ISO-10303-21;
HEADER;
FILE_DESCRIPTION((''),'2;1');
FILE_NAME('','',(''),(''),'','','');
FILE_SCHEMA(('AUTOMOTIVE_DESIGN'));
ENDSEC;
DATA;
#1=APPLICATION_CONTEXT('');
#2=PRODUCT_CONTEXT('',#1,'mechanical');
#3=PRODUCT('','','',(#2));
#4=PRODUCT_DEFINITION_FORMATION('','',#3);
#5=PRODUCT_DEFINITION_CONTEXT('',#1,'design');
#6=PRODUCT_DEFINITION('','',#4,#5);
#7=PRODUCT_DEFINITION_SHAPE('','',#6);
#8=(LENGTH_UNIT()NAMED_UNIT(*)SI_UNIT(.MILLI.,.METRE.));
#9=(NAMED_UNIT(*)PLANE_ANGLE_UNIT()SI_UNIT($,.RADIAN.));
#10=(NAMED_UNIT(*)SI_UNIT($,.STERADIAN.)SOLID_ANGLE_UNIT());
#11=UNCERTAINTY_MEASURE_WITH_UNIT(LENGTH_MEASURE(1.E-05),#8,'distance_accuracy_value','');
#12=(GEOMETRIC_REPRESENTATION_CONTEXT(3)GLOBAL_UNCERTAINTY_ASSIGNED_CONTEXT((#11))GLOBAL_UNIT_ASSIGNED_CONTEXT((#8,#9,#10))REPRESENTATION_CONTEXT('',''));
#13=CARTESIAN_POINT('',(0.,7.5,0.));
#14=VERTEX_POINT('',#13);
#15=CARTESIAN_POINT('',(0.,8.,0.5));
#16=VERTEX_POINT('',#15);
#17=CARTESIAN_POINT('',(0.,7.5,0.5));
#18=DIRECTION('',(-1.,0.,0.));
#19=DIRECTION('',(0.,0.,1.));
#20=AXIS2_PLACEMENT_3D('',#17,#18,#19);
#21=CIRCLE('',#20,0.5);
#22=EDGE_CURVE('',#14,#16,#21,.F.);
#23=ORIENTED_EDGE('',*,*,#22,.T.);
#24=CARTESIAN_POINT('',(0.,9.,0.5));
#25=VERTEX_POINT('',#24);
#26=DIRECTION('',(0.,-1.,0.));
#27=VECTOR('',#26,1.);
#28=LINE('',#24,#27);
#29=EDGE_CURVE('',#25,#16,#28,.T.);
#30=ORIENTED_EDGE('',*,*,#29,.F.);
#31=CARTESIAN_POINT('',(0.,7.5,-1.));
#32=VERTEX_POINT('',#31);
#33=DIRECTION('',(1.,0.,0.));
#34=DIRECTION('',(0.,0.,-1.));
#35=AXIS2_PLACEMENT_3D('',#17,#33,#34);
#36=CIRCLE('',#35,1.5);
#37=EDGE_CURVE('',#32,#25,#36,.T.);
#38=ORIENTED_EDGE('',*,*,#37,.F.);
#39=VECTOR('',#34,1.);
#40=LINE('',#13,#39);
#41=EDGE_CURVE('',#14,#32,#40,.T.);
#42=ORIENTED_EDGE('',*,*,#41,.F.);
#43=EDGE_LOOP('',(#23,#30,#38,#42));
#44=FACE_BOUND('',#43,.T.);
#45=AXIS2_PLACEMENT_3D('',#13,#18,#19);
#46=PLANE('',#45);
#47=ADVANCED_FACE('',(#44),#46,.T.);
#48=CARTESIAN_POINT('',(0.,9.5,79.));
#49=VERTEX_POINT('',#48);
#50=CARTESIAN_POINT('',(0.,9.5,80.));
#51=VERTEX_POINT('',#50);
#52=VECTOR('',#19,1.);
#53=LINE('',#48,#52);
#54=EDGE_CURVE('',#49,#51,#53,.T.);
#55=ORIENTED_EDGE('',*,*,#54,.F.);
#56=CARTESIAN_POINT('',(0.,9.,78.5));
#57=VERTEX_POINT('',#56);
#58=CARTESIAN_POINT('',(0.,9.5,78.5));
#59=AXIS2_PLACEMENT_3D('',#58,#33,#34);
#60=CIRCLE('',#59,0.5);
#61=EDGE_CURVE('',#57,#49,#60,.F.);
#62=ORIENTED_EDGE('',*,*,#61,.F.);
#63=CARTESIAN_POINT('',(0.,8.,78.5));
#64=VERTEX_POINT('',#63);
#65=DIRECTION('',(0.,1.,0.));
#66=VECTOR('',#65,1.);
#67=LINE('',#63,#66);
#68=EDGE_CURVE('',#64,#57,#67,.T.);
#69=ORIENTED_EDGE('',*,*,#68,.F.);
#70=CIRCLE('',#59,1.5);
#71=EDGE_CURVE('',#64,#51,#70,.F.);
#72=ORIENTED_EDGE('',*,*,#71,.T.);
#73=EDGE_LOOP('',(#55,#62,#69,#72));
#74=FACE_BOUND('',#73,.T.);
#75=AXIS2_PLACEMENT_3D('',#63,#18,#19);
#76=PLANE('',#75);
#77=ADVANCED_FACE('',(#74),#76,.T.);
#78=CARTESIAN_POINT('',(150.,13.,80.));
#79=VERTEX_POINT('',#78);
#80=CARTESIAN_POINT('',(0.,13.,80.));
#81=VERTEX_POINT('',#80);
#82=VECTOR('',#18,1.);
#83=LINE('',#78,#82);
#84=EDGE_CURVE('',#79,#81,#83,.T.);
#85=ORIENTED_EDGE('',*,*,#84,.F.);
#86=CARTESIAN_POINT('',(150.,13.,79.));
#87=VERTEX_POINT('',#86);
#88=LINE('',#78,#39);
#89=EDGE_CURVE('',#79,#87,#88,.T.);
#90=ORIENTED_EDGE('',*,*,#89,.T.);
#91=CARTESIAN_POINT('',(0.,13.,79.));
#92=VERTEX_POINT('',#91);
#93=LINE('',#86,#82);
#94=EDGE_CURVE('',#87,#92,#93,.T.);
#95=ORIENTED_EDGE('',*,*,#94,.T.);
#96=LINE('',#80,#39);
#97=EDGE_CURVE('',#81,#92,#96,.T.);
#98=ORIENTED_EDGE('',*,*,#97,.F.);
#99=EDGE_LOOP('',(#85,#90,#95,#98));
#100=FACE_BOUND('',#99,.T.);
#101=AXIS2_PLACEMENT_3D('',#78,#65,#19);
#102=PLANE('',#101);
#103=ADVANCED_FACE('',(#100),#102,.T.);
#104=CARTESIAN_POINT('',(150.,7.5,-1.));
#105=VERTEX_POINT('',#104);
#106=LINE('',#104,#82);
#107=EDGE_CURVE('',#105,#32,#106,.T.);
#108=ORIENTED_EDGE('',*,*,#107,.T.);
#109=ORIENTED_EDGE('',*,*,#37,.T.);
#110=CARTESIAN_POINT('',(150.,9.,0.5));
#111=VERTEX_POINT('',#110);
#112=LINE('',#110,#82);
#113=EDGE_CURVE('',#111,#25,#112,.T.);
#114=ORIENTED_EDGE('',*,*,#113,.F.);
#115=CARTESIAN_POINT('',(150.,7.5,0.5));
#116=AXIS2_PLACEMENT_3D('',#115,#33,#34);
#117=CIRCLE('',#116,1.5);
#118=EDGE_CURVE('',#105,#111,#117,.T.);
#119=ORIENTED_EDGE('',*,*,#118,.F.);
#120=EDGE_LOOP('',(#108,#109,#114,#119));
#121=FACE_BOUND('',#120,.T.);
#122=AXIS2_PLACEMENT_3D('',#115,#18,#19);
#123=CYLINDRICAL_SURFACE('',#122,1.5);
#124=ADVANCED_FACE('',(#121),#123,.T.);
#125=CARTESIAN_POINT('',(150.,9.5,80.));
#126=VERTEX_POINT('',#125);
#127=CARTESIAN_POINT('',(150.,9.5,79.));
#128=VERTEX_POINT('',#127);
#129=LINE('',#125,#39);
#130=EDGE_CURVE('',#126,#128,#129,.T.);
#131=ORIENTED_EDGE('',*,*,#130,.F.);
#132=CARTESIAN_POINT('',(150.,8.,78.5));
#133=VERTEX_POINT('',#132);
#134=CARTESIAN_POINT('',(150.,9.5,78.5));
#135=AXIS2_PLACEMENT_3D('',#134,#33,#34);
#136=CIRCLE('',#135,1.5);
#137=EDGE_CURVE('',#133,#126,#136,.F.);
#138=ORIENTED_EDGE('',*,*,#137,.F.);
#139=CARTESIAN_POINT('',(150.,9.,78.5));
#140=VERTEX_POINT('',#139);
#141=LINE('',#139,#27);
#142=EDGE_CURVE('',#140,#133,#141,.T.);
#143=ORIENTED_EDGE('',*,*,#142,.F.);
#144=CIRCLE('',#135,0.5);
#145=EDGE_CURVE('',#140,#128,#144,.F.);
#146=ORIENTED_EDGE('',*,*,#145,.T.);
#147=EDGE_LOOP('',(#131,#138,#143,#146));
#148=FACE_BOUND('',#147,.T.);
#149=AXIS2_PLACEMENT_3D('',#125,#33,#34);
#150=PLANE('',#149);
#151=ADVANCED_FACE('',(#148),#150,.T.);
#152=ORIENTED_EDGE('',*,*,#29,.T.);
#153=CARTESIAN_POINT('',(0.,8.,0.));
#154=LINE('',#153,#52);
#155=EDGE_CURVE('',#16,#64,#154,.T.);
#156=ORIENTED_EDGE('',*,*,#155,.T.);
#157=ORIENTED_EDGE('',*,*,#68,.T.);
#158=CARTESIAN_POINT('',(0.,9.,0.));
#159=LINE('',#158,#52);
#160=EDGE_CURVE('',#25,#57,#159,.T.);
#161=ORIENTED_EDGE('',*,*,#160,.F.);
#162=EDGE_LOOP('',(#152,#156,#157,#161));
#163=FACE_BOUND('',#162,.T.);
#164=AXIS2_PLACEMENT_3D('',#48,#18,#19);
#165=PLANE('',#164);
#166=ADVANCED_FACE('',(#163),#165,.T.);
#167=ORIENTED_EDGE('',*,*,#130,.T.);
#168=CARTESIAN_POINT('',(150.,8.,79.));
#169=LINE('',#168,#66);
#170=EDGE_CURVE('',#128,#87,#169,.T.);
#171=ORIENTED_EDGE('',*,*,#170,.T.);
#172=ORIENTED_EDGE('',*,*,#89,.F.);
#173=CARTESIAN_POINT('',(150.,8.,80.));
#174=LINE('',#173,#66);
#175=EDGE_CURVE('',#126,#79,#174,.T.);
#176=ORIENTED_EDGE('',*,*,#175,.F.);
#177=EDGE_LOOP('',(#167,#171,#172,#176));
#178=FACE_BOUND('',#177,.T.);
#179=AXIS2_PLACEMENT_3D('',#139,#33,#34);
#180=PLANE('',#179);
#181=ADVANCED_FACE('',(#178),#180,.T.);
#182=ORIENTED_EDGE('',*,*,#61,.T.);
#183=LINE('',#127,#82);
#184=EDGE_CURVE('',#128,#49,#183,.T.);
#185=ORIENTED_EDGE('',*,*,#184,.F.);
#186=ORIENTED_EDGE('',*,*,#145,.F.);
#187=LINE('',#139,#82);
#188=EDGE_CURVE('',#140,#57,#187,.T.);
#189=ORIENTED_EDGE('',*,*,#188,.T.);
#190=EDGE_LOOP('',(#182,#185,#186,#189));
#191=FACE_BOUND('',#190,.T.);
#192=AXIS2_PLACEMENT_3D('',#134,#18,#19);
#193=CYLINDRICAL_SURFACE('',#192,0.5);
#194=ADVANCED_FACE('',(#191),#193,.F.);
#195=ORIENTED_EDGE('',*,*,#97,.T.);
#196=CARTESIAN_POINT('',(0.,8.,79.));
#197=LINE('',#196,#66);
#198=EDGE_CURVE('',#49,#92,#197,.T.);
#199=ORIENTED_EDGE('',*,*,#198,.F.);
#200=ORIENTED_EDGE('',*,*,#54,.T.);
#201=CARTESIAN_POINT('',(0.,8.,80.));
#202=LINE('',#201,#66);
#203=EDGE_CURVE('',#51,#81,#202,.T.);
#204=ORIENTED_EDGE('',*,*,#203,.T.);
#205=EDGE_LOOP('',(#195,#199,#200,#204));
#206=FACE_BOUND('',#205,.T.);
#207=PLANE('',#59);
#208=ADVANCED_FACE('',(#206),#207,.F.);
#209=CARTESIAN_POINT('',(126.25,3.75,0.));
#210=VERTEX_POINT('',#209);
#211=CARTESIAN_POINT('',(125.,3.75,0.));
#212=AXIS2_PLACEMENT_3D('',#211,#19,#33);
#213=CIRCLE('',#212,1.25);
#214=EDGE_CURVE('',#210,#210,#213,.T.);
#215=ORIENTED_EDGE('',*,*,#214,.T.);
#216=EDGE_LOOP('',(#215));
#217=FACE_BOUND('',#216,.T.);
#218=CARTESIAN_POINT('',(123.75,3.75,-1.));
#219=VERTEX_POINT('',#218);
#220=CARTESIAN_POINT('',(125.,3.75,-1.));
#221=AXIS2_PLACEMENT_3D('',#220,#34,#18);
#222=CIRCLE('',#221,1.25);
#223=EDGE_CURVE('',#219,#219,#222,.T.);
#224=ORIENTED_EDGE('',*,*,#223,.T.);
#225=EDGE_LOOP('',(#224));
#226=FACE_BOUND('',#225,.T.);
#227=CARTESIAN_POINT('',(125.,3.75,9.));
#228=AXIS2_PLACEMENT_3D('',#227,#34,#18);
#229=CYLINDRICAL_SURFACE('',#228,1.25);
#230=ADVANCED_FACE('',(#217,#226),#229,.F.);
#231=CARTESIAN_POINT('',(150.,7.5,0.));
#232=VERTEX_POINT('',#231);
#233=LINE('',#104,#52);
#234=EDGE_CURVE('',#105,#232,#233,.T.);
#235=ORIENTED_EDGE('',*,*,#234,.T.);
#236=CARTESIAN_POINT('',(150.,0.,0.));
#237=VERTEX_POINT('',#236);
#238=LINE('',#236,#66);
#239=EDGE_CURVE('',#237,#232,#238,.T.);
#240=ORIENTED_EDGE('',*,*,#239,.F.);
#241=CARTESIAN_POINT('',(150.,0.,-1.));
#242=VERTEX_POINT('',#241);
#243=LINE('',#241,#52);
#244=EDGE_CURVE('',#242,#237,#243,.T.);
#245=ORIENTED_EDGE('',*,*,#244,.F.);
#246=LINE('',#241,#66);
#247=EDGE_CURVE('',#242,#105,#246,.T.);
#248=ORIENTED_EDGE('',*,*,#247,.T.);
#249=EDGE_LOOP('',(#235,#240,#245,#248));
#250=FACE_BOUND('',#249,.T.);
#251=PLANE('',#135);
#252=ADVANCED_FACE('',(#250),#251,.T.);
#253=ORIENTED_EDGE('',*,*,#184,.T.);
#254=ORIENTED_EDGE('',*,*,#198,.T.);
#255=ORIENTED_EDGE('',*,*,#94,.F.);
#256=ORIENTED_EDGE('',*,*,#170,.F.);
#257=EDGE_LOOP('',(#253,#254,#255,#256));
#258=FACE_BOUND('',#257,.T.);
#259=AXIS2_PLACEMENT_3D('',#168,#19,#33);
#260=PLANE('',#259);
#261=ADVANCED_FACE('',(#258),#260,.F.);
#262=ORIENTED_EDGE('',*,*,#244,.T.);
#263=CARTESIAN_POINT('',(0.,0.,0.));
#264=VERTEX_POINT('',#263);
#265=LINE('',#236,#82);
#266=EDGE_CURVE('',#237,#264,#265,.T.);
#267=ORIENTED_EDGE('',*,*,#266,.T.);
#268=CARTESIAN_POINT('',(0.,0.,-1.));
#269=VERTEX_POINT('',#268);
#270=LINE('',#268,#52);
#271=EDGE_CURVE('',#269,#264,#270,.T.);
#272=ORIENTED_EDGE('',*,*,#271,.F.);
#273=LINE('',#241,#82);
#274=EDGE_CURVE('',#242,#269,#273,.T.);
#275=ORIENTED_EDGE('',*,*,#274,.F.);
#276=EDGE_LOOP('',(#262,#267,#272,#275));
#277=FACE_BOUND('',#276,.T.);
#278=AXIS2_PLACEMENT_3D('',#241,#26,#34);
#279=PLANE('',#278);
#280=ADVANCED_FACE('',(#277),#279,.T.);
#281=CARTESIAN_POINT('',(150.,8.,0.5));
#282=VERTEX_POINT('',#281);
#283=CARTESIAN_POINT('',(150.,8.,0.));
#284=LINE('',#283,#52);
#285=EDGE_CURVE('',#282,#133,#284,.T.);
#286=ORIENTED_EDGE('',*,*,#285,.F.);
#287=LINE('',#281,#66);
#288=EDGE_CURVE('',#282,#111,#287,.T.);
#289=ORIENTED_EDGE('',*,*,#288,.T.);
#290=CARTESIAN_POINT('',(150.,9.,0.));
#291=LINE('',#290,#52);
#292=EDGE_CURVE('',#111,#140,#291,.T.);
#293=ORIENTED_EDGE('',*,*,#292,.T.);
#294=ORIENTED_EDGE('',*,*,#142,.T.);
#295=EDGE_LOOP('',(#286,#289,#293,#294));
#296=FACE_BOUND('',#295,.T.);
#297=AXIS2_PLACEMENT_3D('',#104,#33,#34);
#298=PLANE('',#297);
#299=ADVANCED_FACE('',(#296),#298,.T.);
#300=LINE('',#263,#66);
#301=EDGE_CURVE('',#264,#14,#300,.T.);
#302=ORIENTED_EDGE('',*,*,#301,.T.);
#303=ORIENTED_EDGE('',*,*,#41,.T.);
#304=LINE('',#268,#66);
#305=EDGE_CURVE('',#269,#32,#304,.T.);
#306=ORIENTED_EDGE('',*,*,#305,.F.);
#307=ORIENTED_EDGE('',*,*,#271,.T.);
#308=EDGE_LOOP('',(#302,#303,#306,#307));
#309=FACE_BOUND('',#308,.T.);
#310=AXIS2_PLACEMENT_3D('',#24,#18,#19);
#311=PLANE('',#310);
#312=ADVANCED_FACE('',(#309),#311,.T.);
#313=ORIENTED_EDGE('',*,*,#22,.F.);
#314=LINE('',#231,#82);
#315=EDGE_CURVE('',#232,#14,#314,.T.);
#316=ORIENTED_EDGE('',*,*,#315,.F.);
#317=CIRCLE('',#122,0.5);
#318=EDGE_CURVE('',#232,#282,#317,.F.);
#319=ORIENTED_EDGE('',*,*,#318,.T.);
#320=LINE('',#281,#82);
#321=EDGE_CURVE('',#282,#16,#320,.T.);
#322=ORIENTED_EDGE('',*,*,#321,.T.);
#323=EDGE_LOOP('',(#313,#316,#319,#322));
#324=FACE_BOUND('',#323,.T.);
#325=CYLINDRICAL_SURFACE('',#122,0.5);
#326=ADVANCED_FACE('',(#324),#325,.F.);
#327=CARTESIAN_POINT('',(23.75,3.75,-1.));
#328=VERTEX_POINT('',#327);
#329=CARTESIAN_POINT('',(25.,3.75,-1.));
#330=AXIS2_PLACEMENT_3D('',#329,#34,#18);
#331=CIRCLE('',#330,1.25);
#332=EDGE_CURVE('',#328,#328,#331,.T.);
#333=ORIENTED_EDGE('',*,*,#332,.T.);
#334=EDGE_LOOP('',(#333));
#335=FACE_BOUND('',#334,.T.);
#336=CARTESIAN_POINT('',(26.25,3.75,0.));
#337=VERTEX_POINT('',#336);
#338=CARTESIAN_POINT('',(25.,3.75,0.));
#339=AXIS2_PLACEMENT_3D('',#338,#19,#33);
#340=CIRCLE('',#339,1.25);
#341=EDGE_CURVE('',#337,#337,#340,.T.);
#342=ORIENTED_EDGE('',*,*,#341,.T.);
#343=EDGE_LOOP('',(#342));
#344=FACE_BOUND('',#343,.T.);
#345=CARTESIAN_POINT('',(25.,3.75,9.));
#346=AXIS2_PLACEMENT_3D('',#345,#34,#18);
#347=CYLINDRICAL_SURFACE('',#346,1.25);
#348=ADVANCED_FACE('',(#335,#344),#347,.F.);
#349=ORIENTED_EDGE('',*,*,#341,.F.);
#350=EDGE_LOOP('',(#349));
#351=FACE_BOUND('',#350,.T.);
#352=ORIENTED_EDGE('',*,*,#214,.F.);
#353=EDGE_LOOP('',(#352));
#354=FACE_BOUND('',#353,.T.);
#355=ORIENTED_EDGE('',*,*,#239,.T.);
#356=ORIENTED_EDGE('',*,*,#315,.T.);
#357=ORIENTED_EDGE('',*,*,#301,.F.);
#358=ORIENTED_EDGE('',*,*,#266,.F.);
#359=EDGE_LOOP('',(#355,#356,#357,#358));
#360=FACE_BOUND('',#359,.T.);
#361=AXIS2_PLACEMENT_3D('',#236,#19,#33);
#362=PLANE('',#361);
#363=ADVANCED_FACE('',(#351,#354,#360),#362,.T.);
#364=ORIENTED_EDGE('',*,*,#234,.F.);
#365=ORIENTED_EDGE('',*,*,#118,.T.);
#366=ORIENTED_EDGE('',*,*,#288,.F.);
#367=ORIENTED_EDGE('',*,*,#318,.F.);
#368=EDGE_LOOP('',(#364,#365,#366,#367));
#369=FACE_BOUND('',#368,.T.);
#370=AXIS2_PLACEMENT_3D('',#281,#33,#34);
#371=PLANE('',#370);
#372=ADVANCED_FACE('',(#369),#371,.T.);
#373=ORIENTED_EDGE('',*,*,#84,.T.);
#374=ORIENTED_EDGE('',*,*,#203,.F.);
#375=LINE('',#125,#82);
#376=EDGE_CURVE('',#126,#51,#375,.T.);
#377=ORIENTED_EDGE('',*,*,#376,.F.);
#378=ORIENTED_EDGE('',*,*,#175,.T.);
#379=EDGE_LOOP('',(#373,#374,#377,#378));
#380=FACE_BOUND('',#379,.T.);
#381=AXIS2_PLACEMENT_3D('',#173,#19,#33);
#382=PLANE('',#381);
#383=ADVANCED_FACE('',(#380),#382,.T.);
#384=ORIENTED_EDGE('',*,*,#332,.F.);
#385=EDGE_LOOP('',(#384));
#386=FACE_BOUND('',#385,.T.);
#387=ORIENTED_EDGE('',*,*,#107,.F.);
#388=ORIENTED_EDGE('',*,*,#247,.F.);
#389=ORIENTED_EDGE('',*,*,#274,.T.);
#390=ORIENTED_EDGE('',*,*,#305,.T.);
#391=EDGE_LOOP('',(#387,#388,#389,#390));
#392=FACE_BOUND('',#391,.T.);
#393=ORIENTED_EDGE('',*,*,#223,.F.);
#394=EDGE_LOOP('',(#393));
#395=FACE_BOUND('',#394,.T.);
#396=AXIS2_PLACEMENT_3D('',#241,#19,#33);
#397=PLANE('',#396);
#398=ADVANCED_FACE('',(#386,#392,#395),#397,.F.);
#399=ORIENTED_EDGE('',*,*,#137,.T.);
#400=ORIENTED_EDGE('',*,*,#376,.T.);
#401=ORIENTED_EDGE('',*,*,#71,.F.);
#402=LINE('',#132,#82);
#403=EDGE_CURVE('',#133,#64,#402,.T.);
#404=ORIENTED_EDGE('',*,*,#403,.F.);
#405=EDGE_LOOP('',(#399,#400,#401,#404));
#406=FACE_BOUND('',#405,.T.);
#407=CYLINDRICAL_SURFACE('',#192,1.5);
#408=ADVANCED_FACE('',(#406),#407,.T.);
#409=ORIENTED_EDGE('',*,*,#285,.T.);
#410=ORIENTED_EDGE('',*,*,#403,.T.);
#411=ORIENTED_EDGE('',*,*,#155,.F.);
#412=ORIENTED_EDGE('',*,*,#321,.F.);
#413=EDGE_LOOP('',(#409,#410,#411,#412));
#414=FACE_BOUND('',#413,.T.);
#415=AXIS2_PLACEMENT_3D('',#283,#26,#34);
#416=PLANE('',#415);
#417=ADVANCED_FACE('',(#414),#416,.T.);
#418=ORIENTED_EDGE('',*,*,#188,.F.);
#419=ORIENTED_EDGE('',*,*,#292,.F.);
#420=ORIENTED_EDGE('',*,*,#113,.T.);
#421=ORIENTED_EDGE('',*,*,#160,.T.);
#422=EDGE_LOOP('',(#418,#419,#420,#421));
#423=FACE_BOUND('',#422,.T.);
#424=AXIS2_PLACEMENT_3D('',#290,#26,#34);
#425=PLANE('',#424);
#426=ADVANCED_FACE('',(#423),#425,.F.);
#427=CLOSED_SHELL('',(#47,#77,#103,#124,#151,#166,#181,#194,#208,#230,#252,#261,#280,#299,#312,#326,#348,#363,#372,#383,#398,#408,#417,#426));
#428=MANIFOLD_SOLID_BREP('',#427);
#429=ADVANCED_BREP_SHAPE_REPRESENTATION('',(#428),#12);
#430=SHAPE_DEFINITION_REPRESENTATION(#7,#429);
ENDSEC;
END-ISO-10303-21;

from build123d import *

# Parameters (mm, degrees)
BASE_FLANGE1_DEPTH = 150
SKETCH2_R          = 1.25
CUT_EXTRUDE1_DEPTH = 10


# Sheet-metal steps are written as plain solids
with BuildPart() as part:
    # Sketch1 → Base-Flange1 (new body)
    with BuildSketch(Plane(origin=(0, 0, 0), x_dir=(0, 0, -1), z_dir=(1, 0, 0))):
        with BuildLine():
            Line((0, 0), (0, 7.5))
            ThreePointArc((0, 7.5), (-0.146446609, 7.853553391), (-0.5, 8))
            Line((-0.5, 8), (-78.5, 8))
            ThreePointArc((-78.5, 8), (-79.560660172, 8.439339828), (-80, 9.5))
            Line((-80, 9.5), (-80, 13))
            Line((-80, 13), (-79, 13))
            Line((-79, 13), (-79, 9.5))
            ThreePointArc((-79, 9.5), (-78.853553391, 9.146446609), (-78.5, 9))
            Line((-78.5, 9), (-0.5, 9))
            ThreePointArc((-0.5, 9), (0.560660172, 8.560660172), (1, 7.5))
            Line((1, 7.5), (1, 0))
            Line((1, 0), (0, 0))
        make_face()
    extrude(amount=BASE_FLANGE1_DEPTH)

    # Sketch2 → Cut-Extrude1 (cut)
    with BuildSketch(Plane(origin=(0, 0, -1), x_dir=(-1, 0, 0), z_dir=(0, 0, -1))):
        with Locations((-25, 3.75)):
            Circle(SKETCH2_R)
        with Locations((-125, 3.75)):
            Circle(SKETCH2_R)
    extrude(amount=-CUT_EXTRUDE1_DEPTH, mode=Mode.SUBTRACT)


solid = part.part
